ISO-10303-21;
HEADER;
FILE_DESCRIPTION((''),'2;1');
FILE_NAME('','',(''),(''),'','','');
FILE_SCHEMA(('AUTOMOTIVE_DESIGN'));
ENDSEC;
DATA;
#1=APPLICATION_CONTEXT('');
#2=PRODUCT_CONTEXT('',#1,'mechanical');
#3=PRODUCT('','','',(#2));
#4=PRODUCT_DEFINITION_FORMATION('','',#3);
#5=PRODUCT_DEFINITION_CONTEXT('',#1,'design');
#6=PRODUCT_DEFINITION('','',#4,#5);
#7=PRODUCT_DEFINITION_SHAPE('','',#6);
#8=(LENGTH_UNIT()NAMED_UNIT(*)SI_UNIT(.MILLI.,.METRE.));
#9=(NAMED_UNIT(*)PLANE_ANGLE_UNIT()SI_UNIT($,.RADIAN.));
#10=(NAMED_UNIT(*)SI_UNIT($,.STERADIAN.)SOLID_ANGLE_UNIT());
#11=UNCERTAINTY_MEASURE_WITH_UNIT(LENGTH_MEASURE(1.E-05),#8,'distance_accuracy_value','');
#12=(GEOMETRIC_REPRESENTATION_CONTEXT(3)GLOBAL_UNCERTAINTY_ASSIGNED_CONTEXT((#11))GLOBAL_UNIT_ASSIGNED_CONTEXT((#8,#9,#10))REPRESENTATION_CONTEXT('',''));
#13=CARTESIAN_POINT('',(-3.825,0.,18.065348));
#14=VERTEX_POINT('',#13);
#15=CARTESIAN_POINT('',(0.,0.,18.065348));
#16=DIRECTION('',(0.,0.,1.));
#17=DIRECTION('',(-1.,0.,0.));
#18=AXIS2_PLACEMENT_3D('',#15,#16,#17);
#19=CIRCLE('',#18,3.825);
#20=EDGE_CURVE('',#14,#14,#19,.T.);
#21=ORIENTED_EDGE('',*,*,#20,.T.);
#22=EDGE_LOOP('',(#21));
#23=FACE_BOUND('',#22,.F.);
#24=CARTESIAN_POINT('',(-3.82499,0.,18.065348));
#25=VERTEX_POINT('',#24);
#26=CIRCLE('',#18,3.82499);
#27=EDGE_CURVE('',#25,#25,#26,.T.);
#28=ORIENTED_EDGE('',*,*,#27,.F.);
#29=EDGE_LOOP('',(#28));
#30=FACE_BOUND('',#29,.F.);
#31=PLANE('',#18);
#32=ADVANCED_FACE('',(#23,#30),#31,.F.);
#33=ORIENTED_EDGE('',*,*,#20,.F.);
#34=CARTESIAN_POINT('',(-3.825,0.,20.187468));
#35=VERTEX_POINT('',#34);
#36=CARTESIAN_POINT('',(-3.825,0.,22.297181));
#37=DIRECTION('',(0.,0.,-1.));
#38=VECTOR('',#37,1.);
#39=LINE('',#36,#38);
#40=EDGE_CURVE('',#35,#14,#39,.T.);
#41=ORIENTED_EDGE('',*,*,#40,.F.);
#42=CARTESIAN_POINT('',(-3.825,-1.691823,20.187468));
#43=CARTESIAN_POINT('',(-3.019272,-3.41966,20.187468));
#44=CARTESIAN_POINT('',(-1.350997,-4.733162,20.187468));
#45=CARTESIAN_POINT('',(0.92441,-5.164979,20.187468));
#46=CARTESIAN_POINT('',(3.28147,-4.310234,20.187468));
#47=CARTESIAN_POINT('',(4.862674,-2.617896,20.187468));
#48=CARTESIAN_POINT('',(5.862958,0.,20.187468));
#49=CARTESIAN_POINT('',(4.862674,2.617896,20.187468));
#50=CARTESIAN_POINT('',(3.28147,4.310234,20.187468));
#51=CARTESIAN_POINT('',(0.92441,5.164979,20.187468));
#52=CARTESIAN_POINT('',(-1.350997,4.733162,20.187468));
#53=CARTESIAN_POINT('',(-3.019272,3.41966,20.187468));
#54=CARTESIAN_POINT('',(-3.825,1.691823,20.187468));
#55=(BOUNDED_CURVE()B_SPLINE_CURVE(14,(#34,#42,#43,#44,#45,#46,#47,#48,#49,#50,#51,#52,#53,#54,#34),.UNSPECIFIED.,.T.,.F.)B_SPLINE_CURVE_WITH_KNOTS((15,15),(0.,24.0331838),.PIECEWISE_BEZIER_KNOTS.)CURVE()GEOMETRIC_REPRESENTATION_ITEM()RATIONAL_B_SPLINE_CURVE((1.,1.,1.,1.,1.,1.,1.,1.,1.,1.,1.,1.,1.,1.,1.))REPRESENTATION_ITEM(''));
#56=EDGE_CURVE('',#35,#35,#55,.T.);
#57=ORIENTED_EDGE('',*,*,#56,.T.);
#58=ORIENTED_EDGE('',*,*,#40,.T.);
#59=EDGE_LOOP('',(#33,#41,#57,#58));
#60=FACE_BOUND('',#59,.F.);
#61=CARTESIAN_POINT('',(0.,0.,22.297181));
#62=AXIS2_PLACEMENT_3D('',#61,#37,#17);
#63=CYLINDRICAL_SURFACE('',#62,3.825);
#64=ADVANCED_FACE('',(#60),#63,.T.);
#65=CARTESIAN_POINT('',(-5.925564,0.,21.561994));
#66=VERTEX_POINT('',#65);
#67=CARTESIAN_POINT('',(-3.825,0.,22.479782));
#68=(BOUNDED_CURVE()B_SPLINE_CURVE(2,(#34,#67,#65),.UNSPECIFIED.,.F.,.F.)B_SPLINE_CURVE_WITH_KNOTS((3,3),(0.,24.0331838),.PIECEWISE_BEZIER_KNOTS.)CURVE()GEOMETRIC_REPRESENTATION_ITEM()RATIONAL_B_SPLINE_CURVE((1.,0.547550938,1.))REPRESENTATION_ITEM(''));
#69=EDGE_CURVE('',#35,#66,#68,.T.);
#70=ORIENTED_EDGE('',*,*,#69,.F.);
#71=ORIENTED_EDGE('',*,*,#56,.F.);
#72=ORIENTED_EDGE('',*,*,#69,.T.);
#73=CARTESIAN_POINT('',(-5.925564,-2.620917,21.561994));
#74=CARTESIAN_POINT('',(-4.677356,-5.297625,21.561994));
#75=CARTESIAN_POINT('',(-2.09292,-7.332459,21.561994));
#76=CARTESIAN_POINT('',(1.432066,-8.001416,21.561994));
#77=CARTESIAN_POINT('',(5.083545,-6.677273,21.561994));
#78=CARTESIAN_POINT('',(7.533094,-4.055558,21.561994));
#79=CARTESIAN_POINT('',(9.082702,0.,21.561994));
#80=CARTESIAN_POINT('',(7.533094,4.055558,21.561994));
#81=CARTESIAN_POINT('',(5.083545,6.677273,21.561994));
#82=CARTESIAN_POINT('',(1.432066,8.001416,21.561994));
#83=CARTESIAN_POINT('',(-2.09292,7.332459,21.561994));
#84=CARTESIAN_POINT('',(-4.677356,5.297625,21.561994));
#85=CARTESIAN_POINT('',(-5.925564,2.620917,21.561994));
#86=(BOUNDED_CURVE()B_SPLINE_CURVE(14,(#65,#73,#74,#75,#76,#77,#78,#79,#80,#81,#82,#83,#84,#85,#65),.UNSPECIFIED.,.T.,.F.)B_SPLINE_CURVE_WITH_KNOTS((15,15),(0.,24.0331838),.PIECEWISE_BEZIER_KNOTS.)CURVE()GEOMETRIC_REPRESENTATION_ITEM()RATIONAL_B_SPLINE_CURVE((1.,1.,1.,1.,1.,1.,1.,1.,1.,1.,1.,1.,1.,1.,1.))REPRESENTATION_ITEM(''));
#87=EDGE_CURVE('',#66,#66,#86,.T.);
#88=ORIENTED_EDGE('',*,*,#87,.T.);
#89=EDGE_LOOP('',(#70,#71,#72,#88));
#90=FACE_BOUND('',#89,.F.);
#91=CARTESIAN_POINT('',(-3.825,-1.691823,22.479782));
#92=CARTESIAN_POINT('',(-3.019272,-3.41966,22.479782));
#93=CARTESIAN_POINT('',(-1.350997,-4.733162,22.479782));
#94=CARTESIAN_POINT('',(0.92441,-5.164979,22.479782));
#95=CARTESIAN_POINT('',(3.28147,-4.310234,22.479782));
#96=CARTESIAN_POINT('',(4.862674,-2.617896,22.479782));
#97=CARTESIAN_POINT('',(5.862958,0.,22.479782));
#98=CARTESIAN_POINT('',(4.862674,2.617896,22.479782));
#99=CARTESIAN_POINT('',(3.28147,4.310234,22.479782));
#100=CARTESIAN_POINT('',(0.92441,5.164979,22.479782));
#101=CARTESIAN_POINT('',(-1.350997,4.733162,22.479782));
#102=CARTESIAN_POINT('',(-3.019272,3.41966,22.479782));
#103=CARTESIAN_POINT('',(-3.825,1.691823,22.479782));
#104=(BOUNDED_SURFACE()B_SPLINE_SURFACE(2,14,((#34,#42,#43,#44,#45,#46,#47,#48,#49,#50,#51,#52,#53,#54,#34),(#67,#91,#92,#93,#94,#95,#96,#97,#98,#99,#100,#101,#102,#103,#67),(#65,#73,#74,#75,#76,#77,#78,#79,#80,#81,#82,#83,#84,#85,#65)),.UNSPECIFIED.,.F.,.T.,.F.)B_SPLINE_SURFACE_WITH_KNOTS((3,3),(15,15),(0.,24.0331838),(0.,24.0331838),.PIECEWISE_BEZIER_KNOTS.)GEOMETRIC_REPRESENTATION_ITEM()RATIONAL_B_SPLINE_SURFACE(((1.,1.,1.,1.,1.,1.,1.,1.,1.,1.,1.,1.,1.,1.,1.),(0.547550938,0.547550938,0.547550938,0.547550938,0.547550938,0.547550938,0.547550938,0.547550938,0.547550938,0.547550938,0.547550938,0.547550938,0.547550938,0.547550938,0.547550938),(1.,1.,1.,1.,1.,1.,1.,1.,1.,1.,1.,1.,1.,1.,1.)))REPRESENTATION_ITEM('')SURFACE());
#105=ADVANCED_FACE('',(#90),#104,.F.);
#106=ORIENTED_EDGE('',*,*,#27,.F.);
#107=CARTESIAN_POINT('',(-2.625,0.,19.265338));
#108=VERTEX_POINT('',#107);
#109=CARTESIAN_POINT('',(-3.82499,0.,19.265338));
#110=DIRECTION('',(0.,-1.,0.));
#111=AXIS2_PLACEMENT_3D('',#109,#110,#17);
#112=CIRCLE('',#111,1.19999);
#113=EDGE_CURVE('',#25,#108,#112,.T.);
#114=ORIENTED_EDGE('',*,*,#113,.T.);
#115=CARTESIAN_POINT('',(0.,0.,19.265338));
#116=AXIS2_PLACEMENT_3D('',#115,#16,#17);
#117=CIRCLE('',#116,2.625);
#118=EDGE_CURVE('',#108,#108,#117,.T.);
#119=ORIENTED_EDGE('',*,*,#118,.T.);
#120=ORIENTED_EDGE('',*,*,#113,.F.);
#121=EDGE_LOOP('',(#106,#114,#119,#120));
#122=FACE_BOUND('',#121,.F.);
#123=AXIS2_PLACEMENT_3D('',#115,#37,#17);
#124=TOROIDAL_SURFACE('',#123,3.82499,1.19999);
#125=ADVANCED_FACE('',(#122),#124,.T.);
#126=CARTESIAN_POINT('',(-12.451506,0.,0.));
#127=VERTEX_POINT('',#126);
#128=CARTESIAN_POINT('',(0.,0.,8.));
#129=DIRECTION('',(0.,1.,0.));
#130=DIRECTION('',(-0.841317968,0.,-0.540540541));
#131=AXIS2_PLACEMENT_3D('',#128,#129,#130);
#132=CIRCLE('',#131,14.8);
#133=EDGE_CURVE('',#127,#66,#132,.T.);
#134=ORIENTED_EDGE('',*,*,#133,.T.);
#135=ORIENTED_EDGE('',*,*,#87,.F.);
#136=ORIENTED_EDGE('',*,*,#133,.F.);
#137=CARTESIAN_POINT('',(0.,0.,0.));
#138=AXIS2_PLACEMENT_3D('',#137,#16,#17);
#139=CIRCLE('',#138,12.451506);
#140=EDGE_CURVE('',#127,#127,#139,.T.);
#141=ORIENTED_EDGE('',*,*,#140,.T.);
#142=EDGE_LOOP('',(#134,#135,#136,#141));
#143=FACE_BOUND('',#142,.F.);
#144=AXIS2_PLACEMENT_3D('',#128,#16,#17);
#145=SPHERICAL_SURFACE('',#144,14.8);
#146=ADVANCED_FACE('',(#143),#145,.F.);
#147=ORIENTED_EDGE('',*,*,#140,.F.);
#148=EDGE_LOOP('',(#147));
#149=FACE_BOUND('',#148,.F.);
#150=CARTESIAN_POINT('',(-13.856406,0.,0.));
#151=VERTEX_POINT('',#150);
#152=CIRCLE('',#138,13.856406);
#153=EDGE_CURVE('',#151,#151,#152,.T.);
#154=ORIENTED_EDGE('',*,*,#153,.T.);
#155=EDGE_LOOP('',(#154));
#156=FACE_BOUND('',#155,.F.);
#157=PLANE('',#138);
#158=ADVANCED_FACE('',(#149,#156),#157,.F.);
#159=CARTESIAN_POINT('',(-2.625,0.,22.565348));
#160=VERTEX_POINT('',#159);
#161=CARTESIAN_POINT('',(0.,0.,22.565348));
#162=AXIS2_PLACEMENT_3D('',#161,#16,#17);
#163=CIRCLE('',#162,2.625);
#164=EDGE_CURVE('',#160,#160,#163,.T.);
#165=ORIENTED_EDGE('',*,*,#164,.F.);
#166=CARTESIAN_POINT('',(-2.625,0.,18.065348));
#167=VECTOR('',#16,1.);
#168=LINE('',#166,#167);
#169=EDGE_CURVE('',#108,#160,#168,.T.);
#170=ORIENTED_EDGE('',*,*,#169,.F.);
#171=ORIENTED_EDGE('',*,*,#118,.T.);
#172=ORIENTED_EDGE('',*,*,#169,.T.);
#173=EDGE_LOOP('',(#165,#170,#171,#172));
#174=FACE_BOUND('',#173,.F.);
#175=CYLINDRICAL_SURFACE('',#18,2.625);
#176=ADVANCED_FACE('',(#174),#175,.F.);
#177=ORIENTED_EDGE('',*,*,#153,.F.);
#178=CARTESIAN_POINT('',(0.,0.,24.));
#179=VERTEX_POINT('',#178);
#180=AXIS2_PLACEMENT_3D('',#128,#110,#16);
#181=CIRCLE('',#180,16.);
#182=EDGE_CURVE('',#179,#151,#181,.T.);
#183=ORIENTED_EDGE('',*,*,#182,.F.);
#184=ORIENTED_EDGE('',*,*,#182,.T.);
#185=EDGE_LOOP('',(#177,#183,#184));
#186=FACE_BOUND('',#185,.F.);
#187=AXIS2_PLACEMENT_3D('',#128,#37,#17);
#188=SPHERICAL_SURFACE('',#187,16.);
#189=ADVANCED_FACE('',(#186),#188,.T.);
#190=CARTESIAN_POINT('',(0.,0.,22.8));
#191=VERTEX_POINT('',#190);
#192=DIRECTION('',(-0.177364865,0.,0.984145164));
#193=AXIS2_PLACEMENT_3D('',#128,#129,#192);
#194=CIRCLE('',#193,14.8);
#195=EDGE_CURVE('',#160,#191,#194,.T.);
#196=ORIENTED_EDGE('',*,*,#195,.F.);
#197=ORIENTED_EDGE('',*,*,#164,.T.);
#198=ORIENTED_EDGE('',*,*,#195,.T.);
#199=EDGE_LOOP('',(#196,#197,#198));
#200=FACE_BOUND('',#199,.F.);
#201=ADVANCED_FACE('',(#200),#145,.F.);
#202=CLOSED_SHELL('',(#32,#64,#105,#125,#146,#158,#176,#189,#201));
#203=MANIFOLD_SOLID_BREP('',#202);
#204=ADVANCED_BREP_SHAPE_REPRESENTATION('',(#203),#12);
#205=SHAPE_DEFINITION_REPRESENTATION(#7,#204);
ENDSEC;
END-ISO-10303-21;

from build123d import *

# Parameters (mm, degrees)
F2_R = 1.19999
F3_R = 1.5


# Not quite as in the source:
# - a fillet or chamfer is up to 0.001 mm smaller than in the source, because OpenCascade refuses the exact size


with BuildPart() as f1:
    # F0 (on Front) → F1 (revolve)
    with BuildSketch(Plane.XZ):
        with BuildLine():
            Line((0, 22.8), (0, 24))
            ThreePointArc((0, 24), (-13.8564064606, 16), (-13.8564064606, 0))
            Line((-13.8564064606, 0), (-12.451505933, 0))
            ThreePointArc((-12.451505933, 0), (-13.8029789452, 13.3402033893), (-3.825, 22.2971806661))
            ThreePointArc((-3.825, 22.2971806661), (-3.227786159, 22.4437320839), (-2.625, 22.5653484339))
            ThreePointArc((-2.625, 22.5653484339), (-1.3177335047, 22.741220384), (0, 22.8))
        make_face()
        with BuildLine():
            Line((-2.625, 18.0653484339), (-2.625, 22.5653484339))
            ThreePointArc((-2.625, 22.5653484339), (-3.227786159, 22.4437320839), (-3.825, 22.2971806661))
            Line((-3.825, 22.2971806661), (-3.825, 18.0653484339))
            Line((-3.825, 18.0653484339), (-2.625, 18.0653484339))
        make_face()
    revolve(axis=Axis((0, 0, 23.4), (0, 0, 1)))

    # F2 (radius 1.2 in the source; OpenCascade refuses exactly that, so slightly less here)
    f2_edges = [f1.edges().sort_by_distance(p)[0] for p in [
        (2.625, 0, 18.065348),
    ]]
    fillet(f2_edges, radius=F2_R)

    # F3
    f3_edges = [f1.edges().sort_by_distance(p)[0] for p in [
        (3.825, 0, 22.297181),
    ]]
    fillet(f3_edges, radius=F3_R)


solid = f1.part
